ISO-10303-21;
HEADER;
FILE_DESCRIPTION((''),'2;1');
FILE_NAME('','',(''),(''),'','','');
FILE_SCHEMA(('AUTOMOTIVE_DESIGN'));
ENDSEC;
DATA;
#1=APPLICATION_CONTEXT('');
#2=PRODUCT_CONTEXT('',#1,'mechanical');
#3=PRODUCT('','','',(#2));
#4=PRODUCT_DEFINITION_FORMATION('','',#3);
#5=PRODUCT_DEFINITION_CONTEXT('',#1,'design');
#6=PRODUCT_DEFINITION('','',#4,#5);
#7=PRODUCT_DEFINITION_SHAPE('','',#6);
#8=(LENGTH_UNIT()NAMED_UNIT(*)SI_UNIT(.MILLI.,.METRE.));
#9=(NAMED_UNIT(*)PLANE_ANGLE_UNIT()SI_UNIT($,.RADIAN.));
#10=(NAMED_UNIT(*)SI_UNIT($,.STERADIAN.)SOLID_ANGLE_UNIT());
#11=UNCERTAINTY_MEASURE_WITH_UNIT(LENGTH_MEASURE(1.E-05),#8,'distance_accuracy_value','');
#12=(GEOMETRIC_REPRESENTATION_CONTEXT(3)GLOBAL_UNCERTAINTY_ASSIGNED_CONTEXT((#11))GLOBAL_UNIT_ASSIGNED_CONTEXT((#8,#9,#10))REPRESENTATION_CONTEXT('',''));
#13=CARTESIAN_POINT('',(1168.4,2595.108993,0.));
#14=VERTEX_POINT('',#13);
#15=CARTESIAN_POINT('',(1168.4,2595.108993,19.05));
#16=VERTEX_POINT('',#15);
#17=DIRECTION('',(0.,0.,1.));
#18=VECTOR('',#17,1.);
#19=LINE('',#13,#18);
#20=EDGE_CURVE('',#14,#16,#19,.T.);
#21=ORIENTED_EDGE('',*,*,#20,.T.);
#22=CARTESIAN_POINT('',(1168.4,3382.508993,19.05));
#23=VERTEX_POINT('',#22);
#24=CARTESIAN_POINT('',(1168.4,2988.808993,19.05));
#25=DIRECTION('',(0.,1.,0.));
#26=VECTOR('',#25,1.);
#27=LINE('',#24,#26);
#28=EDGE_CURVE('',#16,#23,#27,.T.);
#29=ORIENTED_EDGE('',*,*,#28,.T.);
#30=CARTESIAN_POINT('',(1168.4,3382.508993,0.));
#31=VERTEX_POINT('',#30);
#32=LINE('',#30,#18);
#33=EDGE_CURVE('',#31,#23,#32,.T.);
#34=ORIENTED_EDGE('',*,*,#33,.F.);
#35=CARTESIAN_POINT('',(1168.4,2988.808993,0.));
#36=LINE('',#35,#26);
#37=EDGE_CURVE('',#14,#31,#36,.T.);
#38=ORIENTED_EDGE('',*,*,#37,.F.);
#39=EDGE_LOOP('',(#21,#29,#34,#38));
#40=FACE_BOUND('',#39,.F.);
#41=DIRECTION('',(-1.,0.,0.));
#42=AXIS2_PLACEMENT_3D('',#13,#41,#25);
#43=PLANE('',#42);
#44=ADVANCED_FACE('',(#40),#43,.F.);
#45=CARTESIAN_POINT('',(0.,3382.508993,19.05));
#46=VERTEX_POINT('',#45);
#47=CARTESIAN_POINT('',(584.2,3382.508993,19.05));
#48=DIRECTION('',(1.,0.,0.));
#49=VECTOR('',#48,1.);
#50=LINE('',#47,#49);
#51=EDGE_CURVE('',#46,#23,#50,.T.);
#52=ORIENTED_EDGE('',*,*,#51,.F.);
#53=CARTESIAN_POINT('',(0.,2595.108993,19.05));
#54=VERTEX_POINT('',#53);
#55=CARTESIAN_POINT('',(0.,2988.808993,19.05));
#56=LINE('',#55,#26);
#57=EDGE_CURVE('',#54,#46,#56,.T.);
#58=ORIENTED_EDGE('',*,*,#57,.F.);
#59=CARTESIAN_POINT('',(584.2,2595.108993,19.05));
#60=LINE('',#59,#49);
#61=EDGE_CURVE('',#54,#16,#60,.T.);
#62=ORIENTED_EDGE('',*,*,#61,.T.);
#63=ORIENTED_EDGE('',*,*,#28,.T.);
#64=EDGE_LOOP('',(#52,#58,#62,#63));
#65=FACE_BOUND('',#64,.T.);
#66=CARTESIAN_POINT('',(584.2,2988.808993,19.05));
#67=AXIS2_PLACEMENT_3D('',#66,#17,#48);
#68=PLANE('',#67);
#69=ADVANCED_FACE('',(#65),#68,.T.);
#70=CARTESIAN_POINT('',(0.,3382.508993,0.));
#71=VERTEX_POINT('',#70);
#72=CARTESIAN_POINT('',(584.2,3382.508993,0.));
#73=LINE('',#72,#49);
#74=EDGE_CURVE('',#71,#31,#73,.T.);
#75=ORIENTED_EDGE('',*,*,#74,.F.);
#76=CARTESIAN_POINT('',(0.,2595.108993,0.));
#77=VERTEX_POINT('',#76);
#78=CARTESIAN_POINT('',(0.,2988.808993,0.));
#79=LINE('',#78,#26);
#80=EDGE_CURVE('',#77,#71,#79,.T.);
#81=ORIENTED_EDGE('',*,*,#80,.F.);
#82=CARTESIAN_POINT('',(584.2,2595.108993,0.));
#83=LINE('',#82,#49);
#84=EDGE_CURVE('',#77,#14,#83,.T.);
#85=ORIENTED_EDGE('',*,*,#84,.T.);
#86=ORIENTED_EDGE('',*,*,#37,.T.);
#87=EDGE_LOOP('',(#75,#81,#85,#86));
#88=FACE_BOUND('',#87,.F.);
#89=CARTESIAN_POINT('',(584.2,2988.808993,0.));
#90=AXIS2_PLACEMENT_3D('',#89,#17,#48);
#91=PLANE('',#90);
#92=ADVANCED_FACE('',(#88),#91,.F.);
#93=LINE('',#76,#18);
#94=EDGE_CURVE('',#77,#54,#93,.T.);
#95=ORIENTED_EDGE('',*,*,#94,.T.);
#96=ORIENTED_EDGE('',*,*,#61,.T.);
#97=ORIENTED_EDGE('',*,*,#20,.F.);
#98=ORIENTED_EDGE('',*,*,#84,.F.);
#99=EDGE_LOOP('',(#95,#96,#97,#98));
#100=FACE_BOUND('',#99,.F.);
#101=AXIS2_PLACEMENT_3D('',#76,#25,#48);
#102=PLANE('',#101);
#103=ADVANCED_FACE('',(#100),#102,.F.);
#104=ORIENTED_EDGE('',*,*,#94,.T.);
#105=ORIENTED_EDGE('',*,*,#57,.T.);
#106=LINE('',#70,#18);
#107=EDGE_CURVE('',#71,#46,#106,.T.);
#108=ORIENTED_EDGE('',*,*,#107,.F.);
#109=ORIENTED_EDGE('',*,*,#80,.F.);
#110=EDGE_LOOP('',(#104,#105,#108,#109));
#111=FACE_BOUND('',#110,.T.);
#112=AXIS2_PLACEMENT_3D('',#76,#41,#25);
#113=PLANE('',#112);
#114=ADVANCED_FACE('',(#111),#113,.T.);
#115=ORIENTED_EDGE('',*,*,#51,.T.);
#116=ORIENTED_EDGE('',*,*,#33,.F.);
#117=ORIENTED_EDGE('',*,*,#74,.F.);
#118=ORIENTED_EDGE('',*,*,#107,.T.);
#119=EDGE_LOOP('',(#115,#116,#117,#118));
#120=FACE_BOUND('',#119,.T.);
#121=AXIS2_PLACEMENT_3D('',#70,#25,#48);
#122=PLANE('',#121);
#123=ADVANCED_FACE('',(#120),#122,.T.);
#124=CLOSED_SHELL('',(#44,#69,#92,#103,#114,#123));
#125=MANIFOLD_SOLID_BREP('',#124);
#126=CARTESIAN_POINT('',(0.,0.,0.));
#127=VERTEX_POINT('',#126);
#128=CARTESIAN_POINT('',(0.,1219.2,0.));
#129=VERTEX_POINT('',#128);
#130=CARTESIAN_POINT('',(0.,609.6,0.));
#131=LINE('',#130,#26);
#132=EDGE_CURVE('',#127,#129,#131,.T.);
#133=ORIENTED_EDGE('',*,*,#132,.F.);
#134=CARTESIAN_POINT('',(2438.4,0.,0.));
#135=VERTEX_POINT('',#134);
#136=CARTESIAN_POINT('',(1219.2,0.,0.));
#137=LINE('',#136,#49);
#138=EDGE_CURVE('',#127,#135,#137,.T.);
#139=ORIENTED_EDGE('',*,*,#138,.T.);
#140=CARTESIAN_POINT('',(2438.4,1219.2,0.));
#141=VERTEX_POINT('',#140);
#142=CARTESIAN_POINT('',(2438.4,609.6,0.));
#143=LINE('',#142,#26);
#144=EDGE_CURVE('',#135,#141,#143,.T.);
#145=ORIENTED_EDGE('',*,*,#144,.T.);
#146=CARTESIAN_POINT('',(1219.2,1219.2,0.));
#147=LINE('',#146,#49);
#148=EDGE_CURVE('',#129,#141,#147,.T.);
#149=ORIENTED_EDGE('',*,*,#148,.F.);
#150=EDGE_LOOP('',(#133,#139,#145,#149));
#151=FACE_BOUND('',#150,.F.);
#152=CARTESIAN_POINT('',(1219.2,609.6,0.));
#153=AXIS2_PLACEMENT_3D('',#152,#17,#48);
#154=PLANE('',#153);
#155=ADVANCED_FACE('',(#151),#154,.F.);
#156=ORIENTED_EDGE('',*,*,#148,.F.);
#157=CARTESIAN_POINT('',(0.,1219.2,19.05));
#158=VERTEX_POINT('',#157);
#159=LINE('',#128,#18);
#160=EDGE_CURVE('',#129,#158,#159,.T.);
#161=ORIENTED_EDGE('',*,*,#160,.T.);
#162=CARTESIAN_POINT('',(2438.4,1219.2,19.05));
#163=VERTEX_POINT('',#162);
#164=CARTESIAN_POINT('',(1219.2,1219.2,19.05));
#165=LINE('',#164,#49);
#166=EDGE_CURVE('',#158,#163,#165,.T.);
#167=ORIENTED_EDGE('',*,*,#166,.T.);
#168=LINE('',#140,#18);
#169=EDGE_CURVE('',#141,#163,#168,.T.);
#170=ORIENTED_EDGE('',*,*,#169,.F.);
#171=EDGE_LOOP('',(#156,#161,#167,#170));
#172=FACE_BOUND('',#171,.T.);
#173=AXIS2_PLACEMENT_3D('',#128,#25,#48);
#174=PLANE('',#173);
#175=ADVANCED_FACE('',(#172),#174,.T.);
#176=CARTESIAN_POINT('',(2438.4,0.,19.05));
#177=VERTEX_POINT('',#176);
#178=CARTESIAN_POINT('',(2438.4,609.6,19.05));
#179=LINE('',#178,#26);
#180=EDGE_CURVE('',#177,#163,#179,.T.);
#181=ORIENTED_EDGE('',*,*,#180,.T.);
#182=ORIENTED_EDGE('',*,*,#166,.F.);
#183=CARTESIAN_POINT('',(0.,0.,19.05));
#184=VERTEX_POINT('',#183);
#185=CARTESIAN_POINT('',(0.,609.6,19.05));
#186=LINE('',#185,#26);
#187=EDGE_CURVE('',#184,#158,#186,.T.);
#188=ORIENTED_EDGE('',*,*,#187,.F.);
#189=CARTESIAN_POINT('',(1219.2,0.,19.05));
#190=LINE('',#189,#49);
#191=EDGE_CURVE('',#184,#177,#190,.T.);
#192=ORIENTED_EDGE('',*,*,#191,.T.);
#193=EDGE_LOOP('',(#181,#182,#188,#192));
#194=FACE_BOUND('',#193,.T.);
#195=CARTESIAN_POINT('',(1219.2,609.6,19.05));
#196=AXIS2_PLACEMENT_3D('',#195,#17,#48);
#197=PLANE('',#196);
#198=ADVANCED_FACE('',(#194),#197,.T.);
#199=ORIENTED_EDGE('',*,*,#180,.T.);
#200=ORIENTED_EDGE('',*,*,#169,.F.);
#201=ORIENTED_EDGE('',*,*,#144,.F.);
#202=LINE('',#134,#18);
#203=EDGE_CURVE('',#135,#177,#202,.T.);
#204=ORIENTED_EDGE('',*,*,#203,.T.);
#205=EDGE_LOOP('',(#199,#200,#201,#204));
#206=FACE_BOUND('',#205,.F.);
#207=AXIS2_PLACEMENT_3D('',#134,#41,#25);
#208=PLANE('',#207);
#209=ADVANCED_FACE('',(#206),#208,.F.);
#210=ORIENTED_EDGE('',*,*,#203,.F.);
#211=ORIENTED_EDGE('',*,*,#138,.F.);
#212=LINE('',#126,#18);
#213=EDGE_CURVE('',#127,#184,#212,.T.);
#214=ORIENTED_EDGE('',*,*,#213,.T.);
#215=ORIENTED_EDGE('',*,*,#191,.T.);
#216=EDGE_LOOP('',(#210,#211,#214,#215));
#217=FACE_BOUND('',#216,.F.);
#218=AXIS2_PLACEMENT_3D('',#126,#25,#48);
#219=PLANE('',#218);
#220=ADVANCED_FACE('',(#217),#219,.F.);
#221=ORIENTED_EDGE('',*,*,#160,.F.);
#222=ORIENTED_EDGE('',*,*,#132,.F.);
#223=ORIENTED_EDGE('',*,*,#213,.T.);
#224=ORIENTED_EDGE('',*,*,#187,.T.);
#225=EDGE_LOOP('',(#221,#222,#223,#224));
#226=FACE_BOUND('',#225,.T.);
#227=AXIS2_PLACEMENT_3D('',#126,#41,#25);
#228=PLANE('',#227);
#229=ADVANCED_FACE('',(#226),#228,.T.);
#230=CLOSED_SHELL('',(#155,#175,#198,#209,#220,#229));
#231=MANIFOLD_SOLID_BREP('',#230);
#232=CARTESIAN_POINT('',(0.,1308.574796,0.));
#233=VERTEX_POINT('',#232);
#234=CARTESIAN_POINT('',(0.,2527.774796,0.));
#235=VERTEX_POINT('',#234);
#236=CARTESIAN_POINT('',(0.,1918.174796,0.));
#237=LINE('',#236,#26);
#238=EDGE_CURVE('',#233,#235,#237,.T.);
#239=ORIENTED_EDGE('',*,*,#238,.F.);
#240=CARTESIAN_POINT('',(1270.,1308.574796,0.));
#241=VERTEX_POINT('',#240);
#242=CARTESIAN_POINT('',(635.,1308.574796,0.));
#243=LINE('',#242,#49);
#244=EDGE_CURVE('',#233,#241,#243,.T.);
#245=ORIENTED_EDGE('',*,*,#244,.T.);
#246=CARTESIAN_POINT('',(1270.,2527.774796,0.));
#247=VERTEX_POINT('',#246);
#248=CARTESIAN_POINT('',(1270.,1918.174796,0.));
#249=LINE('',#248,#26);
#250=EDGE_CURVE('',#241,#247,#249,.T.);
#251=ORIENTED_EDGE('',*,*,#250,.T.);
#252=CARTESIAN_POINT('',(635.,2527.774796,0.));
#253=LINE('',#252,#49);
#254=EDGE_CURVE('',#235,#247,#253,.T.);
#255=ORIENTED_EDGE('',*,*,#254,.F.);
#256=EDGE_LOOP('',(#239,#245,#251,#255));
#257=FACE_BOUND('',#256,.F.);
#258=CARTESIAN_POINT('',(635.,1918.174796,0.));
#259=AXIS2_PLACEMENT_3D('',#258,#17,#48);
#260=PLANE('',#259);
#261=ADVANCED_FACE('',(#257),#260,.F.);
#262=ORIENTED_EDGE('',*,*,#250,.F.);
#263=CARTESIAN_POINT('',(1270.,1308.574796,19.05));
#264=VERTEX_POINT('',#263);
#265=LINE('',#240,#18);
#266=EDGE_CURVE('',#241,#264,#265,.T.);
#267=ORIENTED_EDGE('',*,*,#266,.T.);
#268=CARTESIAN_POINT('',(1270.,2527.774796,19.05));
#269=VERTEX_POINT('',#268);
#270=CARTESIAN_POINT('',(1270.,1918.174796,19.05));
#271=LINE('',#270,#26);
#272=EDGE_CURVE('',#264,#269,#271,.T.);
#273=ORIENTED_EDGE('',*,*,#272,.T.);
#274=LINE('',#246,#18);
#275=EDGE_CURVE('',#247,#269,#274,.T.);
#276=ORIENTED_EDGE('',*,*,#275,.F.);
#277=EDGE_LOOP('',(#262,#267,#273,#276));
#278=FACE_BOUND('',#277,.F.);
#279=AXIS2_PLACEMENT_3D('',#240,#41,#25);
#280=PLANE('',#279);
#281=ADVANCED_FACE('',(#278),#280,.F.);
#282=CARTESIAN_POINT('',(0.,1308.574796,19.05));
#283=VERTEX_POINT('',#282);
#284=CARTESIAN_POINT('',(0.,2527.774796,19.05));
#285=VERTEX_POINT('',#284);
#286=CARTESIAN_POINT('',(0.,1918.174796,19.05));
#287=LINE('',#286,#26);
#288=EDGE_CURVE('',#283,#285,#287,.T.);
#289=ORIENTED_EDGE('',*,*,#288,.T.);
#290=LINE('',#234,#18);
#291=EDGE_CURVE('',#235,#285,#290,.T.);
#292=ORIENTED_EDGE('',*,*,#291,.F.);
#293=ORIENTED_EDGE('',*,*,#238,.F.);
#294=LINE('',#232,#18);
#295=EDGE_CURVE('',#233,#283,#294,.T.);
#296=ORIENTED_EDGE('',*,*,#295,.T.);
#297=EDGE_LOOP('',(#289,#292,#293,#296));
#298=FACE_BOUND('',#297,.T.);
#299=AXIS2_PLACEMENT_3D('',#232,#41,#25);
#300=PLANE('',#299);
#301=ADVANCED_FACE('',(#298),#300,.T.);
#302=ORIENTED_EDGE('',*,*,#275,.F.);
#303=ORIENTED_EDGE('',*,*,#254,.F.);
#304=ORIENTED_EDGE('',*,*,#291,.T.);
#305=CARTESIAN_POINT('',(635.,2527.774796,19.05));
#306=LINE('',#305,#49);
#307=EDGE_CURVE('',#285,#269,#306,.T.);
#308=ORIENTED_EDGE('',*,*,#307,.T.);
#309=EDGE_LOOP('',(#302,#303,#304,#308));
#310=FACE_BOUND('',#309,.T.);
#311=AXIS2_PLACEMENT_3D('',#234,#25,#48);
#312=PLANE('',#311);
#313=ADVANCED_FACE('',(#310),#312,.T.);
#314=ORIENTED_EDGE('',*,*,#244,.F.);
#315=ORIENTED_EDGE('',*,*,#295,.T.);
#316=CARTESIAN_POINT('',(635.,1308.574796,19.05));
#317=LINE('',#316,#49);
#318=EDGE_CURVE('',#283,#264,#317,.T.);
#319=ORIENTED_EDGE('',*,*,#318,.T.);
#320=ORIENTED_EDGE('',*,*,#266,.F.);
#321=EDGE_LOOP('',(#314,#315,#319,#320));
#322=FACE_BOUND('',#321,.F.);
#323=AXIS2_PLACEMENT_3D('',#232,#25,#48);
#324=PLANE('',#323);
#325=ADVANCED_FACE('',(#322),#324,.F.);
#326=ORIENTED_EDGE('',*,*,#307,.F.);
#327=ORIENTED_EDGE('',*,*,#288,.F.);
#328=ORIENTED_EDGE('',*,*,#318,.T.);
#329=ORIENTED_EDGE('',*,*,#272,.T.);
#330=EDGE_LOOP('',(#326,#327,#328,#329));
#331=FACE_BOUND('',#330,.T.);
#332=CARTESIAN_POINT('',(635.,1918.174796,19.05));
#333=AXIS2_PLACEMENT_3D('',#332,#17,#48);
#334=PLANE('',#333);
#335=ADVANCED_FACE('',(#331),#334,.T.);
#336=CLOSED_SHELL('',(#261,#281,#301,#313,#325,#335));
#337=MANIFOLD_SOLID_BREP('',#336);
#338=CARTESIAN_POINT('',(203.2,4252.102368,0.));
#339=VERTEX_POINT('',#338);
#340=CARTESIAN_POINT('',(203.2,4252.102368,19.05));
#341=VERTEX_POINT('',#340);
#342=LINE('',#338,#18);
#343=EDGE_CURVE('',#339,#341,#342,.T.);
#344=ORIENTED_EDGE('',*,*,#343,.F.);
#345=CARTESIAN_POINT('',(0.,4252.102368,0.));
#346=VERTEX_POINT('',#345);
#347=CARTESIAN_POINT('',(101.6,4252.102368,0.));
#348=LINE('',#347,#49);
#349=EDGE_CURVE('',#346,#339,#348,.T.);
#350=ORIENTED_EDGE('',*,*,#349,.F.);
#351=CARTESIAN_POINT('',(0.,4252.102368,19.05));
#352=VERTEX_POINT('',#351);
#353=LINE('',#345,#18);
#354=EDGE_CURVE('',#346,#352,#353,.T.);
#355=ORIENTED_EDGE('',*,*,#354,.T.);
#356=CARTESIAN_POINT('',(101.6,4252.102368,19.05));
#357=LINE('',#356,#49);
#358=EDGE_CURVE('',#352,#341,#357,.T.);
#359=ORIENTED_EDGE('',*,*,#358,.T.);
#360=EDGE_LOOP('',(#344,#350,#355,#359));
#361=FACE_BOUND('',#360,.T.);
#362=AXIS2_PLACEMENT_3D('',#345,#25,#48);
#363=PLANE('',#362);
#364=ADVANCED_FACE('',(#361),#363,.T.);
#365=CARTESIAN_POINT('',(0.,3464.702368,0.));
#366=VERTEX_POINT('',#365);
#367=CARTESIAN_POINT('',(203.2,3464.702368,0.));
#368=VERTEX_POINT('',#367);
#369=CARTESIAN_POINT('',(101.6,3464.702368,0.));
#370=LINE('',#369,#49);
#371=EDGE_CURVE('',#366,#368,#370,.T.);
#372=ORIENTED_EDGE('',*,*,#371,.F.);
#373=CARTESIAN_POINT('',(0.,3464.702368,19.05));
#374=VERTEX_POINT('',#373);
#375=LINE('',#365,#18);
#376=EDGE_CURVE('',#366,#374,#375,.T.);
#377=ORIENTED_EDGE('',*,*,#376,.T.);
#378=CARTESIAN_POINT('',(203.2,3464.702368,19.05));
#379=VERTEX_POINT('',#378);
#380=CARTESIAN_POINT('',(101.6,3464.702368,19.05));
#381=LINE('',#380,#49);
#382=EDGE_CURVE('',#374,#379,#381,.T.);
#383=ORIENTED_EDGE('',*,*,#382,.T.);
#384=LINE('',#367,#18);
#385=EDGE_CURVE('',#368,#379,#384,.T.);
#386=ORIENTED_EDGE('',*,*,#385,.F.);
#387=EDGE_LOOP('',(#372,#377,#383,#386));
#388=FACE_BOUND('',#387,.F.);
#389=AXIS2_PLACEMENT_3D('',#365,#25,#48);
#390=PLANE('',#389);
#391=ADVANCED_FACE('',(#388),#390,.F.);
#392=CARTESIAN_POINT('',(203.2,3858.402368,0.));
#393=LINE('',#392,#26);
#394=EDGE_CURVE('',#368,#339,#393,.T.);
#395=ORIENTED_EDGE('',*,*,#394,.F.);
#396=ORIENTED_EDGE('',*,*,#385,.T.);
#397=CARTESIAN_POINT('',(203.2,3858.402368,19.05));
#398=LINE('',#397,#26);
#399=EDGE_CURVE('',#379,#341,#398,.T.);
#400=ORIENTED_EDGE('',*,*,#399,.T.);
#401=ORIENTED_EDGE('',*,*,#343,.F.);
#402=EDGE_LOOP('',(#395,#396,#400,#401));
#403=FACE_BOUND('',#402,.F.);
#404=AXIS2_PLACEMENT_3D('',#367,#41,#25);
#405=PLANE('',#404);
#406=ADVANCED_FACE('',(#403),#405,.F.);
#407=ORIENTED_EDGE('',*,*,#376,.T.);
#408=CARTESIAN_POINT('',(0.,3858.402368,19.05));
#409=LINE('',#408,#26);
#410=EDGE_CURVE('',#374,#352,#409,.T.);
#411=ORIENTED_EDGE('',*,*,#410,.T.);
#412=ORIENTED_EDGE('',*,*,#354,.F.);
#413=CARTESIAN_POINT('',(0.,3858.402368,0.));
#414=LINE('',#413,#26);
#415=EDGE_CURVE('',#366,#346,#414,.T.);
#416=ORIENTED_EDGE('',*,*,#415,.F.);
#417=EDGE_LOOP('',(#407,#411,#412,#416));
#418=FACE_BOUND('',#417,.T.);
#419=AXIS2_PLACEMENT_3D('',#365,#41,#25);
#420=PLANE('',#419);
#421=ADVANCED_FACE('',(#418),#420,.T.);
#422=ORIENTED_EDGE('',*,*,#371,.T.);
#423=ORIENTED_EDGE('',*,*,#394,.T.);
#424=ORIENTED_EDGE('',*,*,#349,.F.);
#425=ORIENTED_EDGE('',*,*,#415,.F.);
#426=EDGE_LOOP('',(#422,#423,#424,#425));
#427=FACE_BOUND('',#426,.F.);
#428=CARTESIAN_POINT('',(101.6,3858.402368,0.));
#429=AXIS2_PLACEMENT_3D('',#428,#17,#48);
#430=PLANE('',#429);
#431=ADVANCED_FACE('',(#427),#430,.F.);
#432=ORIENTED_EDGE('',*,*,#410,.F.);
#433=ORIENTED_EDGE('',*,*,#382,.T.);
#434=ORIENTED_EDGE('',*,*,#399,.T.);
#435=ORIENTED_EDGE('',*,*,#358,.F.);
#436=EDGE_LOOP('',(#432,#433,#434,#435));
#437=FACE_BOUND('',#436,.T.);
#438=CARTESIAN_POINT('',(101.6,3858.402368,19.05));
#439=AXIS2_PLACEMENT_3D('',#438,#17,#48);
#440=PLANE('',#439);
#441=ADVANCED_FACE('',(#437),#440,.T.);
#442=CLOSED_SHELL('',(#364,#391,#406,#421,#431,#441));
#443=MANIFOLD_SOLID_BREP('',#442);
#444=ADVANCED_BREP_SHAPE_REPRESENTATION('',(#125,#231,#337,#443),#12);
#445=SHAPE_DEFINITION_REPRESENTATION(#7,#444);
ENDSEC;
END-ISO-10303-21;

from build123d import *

# Parameters (mm, degrees)
F0_W     = 2438.4
F0_H     = 1219.2
F1_DEPTH = 19.05
F0_W_2   = 1270
F0_W_3   = 1168.4
F0_H_2   = 787.4
F0_W_4   = 203.2


# Not quite as in the source:
# - a length typed as a fraction of an inch, garbled in the dataset ("3 / 203.2 mm" for 3/8 in), is restored


with BuildPart() as f1:
    # F0 (on Top) → F1 (new body)
    with BuildSketch(Plane.XY):
        with Locations((1219.2, 609.6)):
            Rectangle(F0_W, F0_H)
    extrude(amount=F1_DEPTH)


with BuildPart() as f1b:
    # F0 (on Top) → F1, piece 2 (new body)
    with BuildSketch(Plane.XY):
        with Locations((635, 1918.174795723)):
            Rectangle(F0_W_2, F0_H)
    extrude(amount=F1_DEPTH)


with BuildPart() as f1c:
    # F0 (on Top) → F1, piece 3 (new body)
    with BuildSketch(Plane.XY):
        with Locations((584.2, 2988.8089931488)):
            Rectangle(F0_W_3, F0_H_2)
    extrude(amount=F1_DEPTH)


with BuildPart() as f1d:
    # F0 (on Top) → F1, piece 4 (new body)
    with BuildSketch(Plane.XY):
        with Locations((101.6, 3858.4023677826)):
            Rectangle(F0_W_4, F0_H_2)
    extrude(amount=F1_DEPTH)


solid = Compound([f1.part, f1b.part, f1c.part, f1d.part])
